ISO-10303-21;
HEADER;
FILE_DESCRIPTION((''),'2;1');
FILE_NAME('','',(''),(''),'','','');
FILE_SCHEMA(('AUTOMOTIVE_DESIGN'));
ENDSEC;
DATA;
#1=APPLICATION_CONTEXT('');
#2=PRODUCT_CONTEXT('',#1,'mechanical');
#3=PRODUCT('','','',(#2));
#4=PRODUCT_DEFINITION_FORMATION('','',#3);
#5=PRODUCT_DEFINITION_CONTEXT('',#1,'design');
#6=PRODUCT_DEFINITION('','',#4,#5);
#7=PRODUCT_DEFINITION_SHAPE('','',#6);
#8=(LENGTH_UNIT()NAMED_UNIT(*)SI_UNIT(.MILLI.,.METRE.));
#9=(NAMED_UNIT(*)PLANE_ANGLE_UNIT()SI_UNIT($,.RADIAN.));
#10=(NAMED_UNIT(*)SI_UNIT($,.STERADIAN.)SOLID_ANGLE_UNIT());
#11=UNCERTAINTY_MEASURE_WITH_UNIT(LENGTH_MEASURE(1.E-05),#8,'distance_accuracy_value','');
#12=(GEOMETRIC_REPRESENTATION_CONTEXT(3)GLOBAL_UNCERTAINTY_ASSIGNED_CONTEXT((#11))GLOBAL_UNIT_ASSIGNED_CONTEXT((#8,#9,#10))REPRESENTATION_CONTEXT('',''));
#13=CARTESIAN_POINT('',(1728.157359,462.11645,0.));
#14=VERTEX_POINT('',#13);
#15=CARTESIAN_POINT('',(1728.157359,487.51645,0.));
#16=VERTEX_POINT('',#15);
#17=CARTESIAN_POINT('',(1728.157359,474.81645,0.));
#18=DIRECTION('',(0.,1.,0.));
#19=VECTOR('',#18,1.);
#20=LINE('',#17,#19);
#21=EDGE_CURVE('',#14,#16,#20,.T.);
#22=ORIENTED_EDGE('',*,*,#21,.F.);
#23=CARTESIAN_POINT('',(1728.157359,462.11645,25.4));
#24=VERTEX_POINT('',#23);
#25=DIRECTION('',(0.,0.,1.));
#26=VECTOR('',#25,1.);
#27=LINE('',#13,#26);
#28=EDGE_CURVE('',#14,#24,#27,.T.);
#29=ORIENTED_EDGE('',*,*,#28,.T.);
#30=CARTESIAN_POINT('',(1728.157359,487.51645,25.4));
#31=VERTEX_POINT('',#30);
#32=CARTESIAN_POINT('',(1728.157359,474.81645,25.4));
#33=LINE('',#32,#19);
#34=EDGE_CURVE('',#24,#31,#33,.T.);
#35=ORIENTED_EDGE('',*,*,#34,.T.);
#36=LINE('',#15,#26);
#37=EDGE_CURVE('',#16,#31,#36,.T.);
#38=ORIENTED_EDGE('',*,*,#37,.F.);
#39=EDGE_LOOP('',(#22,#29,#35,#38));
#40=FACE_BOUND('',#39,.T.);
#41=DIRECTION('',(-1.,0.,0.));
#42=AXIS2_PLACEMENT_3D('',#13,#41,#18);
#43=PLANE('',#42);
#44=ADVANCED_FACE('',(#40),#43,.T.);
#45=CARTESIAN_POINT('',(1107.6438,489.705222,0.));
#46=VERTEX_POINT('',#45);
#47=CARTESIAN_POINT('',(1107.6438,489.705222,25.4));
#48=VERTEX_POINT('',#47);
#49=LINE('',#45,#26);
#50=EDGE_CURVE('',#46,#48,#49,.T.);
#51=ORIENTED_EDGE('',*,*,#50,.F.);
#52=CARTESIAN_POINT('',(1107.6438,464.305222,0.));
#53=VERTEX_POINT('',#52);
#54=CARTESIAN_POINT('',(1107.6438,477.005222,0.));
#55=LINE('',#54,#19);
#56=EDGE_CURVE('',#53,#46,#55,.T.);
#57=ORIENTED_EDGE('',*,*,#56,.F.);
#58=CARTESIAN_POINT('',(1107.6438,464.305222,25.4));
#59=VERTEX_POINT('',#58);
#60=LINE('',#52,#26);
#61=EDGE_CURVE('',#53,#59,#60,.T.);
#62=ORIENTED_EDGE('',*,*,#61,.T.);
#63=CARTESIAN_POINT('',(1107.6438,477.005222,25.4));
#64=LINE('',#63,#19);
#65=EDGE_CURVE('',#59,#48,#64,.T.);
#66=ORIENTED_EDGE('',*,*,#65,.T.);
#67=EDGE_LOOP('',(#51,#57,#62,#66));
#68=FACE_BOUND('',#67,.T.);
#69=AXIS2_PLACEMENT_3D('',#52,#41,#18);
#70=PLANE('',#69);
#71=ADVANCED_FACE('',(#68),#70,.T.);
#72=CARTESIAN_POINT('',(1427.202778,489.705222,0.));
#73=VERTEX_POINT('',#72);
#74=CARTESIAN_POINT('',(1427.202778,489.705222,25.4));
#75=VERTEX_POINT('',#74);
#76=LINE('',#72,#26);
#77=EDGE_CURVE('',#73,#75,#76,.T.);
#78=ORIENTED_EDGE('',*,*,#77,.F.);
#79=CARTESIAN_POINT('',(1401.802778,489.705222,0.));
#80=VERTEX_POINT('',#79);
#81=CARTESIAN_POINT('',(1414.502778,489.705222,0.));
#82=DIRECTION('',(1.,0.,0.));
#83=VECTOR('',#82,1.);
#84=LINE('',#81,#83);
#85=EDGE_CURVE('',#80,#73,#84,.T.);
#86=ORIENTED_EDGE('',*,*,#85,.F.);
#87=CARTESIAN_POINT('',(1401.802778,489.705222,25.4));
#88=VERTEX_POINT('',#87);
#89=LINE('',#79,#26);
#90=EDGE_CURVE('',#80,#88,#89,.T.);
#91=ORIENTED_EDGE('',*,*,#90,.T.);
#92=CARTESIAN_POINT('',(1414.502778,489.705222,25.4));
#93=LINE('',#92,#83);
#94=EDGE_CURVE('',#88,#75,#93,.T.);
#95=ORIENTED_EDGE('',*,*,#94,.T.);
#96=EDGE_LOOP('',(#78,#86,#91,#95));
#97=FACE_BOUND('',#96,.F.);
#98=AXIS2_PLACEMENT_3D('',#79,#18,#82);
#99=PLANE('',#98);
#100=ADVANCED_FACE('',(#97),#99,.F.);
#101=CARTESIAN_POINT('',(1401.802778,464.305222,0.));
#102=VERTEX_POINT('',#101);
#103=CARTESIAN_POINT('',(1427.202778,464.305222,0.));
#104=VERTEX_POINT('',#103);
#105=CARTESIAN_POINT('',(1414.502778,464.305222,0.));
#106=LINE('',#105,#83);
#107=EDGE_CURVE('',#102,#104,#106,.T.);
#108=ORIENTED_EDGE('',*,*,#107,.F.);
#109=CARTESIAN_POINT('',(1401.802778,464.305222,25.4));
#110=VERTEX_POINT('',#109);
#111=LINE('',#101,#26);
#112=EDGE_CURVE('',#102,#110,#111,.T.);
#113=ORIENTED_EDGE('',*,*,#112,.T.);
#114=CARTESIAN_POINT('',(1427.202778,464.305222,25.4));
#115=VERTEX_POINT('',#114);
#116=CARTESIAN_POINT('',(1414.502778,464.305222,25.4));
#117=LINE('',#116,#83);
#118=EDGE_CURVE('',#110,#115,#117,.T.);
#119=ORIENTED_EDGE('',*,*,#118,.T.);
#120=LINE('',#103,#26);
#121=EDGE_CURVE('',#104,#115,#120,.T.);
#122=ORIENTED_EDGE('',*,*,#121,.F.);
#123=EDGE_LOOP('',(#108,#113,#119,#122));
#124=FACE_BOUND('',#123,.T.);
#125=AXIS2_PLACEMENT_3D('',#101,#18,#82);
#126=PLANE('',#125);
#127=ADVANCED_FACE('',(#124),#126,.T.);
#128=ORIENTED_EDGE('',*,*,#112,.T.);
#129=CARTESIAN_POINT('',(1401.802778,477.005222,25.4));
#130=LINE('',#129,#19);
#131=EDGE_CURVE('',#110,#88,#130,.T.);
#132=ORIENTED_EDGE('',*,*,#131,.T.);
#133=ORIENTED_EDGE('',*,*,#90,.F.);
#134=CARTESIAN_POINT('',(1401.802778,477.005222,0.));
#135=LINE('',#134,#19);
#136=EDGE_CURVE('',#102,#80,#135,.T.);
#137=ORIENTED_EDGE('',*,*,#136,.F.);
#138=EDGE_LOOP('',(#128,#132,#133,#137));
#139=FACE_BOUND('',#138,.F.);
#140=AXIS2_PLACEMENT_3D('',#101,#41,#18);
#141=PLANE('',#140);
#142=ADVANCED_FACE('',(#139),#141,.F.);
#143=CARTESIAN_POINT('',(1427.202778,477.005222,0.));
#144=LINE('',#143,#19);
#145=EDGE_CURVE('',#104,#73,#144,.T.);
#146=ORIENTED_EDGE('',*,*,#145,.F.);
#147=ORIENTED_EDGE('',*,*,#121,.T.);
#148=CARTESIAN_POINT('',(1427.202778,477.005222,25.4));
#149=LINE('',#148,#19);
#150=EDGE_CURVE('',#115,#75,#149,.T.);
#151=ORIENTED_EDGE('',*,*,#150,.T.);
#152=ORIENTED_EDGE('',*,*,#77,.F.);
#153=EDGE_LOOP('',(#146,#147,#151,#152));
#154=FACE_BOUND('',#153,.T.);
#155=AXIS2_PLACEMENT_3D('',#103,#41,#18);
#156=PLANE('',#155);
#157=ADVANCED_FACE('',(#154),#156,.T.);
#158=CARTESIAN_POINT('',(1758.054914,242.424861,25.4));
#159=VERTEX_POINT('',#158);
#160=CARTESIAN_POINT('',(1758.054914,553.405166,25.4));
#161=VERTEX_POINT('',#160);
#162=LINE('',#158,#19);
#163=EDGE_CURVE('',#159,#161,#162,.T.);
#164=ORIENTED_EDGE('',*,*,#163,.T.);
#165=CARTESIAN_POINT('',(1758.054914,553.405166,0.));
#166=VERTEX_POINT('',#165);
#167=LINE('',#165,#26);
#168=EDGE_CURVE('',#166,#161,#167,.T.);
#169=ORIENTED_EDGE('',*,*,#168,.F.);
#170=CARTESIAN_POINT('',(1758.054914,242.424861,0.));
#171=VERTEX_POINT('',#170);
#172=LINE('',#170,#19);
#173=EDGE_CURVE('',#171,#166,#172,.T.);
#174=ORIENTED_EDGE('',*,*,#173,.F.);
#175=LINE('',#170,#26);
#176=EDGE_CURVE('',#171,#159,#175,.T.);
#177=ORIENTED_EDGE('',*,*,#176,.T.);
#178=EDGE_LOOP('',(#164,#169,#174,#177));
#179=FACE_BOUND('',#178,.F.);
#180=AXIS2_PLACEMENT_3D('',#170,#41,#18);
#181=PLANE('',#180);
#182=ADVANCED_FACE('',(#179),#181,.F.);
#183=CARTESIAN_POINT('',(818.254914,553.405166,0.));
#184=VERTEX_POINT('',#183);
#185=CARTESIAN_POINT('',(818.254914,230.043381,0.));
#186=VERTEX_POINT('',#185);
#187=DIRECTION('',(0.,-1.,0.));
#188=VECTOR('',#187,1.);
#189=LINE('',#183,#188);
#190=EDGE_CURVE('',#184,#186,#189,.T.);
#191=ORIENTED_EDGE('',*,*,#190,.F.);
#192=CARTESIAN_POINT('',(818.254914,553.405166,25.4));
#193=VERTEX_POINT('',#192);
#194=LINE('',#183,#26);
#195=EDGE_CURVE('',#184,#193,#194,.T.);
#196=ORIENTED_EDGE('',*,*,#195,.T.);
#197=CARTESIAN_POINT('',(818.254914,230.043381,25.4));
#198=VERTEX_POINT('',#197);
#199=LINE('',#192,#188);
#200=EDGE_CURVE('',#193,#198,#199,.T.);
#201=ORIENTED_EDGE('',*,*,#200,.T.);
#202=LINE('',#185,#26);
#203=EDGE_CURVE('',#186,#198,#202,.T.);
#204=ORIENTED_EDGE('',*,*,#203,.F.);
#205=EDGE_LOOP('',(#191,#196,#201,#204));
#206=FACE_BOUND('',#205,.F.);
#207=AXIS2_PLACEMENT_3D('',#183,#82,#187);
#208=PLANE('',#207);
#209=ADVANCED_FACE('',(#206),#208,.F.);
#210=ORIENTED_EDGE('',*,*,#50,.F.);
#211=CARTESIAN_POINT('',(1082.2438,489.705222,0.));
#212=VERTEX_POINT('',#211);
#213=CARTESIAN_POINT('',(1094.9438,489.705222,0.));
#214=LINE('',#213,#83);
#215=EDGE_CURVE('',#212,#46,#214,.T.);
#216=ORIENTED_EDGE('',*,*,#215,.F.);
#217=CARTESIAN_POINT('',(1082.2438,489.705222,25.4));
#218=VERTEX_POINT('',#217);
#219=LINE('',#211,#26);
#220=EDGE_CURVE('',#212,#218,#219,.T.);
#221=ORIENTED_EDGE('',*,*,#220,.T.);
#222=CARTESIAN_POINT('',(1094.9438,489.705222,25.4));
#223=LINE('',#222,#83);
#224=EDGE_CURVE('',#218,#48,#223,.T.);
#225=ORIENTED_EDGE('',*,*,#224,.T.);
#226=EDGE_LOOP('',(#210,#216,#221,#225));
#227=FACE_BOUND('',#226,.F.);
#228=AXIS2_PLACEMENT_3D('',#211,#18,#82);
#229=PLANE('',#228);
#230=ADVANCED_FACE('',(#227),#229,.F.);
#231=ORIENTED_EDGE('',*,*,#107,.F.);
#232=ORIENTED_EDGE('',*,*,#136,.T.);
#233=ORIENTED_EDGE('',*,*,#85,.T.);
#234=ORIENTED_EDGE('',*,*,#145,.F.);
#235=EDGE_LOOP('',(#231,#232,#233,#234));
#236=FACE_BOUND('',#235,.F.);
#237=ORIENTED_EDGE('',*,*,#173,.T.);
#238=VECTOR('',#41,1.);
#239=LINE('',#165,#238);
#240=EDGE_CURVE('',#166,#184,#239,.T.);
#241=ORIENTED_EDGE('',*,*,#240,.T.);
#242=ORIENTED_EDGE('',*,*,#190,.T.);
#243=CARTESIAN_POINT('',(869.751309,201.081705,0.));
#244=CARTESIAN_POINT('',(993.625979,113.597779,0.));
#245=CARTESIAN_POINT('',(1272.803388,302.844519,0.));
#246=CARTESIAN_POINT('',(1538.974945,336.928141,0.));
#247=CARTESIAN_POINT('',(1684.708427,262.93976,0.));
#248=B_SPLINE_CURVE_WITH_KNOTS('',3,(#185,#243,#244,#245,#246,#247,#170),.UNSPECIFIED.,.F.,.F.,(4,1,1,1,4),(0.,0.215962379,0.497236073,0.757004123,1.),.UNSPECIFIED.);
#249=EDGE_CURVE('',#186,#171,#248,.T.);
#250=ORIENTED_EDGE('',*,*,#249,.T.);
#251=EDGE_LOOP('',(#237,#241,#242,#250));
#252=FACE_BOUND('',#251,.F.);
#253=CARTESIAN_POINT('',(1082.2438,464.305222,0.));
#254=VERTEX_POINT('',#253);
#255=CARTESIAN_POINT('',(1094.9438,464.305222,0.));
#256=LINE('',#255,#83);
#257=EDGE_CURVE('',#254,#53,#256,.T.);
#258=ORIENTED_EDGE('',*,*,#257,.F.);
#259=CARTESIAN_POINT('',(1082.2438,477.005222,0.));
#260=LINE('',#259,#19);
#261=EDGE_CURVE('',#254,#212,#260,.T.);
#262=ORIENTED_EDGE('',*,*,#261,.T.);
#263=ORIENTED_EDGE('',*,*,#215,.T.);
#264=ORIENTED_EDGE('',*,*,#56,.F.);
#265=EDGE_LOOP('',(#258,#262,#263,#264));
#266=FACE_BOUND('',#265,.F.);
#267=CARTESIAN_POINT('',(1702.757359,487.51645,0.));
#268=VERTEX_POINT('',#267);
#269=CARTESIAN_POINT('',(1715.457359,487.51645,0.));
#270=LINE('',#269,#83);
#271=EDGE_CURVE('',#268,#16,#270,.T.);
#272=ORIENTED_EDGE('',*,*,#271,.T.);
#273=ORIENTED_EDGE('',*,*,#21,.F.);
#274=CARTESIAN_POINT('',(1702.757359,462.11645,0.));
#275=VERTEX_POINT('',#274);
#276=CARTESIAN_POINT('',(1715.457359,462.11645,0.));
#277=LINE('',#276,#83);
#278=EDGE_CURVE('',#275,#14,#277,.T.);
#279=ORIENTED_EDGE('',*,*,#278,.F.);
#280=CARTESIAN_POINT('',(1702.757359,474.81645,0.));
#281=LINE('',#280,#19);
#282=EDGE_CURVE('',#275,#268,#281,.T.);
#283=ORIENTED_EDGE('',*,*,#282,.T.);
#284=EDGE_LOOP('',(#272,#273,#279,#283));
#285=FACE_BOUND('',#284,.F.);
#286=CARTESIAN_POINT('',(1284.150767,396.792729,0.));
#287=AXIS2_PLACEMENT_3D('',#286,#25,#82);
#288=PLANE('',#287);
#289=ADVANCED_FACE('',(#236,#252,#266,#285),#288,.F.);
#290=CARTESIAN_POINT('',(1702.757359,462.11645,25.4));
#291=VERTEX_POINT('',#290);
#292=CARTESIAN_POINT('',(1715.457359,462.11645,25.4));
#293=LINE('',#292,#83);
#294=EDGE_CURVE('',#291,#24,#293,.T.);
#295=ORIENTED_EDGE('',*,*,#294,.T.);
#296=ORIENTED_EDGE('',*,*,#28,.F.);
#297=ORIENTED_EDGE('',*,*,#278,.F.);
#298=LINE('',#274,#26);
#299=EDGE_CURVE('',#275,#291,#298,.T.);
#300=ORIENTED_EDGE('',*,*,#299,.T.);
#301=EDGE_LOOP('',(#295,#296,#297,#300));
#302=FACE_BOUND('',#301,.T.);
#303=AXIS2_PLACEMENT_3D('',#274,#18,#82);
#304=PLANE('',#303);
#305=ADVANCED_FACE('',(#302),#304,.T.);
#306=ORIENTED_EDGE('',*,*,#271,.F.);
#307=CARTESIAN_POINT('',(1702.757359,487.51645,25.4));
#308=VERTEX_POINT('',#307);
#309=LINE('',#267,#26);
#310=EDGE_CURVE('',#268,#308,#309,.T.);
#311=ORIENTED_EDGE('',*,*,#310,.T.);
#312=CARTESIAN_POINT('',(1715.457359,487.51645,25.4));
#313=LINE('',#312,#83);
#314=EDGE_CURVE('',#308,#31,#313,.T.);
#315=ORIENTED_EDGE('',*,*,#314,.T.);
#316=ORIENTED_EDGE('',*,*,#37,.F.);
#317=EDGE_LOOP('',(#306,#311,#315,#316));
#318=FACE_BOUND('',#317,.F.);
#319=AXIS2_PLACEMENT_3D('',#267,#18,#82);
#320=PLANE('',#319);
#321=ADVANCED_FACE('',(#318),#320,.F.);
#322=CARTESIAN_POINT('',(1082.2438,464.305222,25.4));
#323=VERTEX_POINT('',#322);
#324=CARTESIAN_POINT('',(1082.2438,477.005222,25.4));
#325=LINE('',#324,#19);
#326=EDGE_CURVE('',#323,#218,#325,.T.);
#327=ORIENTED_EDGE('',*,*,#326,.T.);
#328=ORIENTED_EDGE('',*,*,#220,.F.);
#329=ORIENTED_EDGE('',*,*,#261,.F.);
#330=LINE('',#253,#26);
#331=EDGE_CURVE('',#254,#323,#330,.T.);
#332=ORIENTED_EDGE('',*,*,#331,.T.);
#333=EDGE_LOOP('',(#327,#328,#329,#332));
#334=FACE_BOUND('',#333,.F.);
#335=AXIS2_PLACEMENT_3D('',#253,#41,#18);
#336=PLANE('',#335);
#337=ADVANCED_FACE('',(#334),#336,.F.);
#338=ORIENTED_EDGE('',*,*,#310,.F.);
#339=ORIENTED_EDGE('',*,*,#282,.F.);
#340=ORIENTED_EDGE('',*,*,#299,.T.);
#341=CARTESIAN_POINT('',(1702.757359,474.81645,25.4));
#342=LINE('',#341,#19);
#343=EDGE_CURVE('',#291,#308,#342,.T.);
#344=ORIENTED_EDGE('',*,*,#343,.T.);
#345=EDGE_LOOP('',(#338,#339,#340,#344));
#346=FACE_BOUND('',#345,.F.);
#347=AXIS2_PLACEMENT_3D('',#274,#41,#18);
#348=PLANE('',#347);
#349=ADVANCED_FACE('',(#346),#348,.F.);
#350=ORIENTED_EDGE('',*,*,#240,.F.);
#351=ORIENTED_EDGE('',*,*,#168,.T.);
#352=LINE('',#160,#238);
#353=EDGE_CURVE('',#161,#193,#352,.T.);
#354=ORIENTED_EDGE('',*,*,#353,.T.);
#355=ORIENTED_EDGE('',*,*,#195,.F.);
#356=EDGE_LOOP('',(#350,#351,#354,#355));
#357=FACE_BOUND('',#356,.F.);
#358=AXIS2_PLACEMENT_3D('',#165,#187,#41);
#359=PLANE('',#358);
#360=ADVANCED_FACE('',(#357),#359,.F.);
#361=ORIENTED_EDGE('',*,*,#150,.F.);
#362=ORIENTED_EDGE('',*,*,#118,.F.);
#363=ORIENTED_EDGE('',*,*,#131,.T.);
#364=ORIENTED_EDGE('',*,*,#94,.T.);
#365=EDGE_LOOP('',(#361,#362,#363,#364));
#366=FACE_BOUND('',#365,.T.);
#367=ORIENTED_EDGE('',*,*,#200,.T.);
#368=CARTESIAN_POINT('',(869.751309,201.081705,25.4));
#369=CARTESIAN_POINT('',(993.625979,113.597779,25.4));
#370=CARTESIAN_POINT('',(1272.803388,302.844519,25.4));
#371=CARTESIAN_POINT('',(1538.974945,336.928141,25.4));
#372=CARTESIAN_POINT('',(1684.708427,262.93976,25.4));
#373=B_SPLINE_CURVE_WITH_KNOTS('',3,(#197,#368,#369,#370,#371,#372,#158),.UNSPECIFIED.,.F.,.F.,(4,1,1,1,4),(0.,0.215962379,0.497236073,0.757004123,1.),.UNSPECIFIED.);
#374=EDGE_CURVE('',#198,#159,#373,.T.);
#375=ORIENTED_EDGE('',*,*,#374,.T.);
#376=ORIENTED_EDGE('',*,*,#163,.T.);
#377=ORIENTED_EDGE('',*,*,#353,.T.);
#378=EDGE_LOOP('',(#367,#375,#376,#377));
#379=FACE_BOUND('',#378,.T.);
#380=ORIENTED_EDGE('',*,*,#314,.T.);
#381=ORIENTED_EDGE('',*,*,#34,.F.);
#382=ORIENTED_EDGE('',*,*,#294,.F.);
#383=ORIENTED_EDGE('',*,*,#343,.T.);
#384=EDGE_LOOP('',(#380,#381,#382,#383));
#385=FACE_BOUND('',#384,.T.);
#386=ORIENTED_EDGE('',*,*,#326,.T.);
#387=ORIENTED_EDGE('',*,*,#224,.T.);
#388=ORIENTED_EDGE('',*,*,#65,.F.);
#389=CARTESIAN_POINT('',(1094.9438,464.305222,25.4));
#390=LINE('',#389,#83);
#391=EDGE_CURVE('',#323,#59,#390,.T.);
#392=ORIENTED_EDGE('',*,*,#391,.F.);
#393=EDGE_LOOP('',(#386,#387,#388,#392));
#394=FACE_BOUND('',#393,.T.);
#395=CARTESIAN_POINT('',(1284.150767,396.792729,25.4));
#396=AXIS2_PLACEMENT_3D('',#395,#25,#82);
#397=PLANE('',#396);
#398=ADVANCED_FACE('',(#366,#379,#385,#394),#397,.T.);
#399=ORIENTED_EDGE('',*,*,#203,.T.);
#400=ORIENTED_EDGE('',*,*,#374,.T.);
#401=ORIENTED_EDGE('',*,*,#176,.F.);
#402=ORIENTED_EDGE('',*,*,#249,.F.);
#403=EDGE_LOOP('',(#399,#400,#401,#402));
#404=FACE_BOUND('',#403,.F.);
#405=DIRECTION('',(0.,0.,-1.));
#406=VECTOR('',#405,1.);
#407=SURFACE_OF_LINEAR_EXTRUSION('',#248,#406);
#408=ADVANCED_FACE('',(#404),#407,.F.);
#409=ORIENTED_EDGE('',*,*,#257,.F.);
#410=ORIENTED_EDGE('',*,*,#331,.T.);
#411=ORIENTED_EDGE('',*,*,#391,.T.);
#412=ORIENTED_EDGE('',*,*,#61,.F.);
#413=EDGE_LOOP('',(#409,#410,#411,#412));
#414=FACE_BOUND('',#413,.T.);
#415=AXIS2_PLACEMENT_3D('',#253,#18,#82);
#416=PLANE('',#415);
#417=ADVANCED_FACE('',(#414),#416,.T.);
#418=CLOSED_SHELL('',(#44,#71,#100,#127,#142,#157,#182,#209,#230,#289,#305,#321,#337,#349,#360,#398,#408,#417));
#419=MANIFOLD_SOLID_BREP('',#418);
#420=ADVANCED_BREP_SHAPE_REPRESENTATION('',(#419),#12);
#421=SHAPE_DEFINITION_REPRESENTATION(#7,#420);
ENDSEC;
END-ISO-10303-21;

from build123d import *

# Parameters (mm, degrees)
F0_W     = 25.4
F0_H     = 25.4
F1_DEPTH = 25.4


with BuildPart() as f1:
    # F0 (on Top) → F1 (new body)
    with BuildSketch(Plane.XY):
        with BuildLine():
            Line((1377.054914093, 553.4051656723), (818.254914093, 553.4051656723))
            Line((818.254914093, 553.4051656723), (818.254914093, 230.0433814526))
            add(Edge.make_bspline(
                [(818.254914093, 230.0433814526), (869.7513088234, 201.0817050342), (993.6259790946, 113.597779136), (1272.8033875168, 302.84451887), (1538.9749454978, 336.9281412477), (1684.7084265303, 262.9397603077), (1758.054914093, 242.4248605967)],
                knots=[0, 0, 0, 0, 0.215962379, 0.4972360733, 0.7570041226, 1, 1, 1, 1], degree=3))
            Line((1758.054914093, 242.4248605967), (1758.054914093, 553.4051656723))
            Line((1758.054914093, 553.4051656723), (1377.054914093, 553.4051656723))
        make_face()
        with Locations((1094.9438001633, 477.0052220345)):
            Rectangle(F0_W, F0_H, mode=Mode.SUBTRACT)
        with Locations((1414.502778244, 477.0052220345)):
            Rectangle(F0_W, F0_H, mode=Mode.SUBTRACT)
        with Locations((1715.457358551, 474.8164500713)):
            Rectangle(F0_W, F0_H, mode=Mode.SUBTRACT)
    extrude(amount=F1_DEPTH)


solid = f1.part
